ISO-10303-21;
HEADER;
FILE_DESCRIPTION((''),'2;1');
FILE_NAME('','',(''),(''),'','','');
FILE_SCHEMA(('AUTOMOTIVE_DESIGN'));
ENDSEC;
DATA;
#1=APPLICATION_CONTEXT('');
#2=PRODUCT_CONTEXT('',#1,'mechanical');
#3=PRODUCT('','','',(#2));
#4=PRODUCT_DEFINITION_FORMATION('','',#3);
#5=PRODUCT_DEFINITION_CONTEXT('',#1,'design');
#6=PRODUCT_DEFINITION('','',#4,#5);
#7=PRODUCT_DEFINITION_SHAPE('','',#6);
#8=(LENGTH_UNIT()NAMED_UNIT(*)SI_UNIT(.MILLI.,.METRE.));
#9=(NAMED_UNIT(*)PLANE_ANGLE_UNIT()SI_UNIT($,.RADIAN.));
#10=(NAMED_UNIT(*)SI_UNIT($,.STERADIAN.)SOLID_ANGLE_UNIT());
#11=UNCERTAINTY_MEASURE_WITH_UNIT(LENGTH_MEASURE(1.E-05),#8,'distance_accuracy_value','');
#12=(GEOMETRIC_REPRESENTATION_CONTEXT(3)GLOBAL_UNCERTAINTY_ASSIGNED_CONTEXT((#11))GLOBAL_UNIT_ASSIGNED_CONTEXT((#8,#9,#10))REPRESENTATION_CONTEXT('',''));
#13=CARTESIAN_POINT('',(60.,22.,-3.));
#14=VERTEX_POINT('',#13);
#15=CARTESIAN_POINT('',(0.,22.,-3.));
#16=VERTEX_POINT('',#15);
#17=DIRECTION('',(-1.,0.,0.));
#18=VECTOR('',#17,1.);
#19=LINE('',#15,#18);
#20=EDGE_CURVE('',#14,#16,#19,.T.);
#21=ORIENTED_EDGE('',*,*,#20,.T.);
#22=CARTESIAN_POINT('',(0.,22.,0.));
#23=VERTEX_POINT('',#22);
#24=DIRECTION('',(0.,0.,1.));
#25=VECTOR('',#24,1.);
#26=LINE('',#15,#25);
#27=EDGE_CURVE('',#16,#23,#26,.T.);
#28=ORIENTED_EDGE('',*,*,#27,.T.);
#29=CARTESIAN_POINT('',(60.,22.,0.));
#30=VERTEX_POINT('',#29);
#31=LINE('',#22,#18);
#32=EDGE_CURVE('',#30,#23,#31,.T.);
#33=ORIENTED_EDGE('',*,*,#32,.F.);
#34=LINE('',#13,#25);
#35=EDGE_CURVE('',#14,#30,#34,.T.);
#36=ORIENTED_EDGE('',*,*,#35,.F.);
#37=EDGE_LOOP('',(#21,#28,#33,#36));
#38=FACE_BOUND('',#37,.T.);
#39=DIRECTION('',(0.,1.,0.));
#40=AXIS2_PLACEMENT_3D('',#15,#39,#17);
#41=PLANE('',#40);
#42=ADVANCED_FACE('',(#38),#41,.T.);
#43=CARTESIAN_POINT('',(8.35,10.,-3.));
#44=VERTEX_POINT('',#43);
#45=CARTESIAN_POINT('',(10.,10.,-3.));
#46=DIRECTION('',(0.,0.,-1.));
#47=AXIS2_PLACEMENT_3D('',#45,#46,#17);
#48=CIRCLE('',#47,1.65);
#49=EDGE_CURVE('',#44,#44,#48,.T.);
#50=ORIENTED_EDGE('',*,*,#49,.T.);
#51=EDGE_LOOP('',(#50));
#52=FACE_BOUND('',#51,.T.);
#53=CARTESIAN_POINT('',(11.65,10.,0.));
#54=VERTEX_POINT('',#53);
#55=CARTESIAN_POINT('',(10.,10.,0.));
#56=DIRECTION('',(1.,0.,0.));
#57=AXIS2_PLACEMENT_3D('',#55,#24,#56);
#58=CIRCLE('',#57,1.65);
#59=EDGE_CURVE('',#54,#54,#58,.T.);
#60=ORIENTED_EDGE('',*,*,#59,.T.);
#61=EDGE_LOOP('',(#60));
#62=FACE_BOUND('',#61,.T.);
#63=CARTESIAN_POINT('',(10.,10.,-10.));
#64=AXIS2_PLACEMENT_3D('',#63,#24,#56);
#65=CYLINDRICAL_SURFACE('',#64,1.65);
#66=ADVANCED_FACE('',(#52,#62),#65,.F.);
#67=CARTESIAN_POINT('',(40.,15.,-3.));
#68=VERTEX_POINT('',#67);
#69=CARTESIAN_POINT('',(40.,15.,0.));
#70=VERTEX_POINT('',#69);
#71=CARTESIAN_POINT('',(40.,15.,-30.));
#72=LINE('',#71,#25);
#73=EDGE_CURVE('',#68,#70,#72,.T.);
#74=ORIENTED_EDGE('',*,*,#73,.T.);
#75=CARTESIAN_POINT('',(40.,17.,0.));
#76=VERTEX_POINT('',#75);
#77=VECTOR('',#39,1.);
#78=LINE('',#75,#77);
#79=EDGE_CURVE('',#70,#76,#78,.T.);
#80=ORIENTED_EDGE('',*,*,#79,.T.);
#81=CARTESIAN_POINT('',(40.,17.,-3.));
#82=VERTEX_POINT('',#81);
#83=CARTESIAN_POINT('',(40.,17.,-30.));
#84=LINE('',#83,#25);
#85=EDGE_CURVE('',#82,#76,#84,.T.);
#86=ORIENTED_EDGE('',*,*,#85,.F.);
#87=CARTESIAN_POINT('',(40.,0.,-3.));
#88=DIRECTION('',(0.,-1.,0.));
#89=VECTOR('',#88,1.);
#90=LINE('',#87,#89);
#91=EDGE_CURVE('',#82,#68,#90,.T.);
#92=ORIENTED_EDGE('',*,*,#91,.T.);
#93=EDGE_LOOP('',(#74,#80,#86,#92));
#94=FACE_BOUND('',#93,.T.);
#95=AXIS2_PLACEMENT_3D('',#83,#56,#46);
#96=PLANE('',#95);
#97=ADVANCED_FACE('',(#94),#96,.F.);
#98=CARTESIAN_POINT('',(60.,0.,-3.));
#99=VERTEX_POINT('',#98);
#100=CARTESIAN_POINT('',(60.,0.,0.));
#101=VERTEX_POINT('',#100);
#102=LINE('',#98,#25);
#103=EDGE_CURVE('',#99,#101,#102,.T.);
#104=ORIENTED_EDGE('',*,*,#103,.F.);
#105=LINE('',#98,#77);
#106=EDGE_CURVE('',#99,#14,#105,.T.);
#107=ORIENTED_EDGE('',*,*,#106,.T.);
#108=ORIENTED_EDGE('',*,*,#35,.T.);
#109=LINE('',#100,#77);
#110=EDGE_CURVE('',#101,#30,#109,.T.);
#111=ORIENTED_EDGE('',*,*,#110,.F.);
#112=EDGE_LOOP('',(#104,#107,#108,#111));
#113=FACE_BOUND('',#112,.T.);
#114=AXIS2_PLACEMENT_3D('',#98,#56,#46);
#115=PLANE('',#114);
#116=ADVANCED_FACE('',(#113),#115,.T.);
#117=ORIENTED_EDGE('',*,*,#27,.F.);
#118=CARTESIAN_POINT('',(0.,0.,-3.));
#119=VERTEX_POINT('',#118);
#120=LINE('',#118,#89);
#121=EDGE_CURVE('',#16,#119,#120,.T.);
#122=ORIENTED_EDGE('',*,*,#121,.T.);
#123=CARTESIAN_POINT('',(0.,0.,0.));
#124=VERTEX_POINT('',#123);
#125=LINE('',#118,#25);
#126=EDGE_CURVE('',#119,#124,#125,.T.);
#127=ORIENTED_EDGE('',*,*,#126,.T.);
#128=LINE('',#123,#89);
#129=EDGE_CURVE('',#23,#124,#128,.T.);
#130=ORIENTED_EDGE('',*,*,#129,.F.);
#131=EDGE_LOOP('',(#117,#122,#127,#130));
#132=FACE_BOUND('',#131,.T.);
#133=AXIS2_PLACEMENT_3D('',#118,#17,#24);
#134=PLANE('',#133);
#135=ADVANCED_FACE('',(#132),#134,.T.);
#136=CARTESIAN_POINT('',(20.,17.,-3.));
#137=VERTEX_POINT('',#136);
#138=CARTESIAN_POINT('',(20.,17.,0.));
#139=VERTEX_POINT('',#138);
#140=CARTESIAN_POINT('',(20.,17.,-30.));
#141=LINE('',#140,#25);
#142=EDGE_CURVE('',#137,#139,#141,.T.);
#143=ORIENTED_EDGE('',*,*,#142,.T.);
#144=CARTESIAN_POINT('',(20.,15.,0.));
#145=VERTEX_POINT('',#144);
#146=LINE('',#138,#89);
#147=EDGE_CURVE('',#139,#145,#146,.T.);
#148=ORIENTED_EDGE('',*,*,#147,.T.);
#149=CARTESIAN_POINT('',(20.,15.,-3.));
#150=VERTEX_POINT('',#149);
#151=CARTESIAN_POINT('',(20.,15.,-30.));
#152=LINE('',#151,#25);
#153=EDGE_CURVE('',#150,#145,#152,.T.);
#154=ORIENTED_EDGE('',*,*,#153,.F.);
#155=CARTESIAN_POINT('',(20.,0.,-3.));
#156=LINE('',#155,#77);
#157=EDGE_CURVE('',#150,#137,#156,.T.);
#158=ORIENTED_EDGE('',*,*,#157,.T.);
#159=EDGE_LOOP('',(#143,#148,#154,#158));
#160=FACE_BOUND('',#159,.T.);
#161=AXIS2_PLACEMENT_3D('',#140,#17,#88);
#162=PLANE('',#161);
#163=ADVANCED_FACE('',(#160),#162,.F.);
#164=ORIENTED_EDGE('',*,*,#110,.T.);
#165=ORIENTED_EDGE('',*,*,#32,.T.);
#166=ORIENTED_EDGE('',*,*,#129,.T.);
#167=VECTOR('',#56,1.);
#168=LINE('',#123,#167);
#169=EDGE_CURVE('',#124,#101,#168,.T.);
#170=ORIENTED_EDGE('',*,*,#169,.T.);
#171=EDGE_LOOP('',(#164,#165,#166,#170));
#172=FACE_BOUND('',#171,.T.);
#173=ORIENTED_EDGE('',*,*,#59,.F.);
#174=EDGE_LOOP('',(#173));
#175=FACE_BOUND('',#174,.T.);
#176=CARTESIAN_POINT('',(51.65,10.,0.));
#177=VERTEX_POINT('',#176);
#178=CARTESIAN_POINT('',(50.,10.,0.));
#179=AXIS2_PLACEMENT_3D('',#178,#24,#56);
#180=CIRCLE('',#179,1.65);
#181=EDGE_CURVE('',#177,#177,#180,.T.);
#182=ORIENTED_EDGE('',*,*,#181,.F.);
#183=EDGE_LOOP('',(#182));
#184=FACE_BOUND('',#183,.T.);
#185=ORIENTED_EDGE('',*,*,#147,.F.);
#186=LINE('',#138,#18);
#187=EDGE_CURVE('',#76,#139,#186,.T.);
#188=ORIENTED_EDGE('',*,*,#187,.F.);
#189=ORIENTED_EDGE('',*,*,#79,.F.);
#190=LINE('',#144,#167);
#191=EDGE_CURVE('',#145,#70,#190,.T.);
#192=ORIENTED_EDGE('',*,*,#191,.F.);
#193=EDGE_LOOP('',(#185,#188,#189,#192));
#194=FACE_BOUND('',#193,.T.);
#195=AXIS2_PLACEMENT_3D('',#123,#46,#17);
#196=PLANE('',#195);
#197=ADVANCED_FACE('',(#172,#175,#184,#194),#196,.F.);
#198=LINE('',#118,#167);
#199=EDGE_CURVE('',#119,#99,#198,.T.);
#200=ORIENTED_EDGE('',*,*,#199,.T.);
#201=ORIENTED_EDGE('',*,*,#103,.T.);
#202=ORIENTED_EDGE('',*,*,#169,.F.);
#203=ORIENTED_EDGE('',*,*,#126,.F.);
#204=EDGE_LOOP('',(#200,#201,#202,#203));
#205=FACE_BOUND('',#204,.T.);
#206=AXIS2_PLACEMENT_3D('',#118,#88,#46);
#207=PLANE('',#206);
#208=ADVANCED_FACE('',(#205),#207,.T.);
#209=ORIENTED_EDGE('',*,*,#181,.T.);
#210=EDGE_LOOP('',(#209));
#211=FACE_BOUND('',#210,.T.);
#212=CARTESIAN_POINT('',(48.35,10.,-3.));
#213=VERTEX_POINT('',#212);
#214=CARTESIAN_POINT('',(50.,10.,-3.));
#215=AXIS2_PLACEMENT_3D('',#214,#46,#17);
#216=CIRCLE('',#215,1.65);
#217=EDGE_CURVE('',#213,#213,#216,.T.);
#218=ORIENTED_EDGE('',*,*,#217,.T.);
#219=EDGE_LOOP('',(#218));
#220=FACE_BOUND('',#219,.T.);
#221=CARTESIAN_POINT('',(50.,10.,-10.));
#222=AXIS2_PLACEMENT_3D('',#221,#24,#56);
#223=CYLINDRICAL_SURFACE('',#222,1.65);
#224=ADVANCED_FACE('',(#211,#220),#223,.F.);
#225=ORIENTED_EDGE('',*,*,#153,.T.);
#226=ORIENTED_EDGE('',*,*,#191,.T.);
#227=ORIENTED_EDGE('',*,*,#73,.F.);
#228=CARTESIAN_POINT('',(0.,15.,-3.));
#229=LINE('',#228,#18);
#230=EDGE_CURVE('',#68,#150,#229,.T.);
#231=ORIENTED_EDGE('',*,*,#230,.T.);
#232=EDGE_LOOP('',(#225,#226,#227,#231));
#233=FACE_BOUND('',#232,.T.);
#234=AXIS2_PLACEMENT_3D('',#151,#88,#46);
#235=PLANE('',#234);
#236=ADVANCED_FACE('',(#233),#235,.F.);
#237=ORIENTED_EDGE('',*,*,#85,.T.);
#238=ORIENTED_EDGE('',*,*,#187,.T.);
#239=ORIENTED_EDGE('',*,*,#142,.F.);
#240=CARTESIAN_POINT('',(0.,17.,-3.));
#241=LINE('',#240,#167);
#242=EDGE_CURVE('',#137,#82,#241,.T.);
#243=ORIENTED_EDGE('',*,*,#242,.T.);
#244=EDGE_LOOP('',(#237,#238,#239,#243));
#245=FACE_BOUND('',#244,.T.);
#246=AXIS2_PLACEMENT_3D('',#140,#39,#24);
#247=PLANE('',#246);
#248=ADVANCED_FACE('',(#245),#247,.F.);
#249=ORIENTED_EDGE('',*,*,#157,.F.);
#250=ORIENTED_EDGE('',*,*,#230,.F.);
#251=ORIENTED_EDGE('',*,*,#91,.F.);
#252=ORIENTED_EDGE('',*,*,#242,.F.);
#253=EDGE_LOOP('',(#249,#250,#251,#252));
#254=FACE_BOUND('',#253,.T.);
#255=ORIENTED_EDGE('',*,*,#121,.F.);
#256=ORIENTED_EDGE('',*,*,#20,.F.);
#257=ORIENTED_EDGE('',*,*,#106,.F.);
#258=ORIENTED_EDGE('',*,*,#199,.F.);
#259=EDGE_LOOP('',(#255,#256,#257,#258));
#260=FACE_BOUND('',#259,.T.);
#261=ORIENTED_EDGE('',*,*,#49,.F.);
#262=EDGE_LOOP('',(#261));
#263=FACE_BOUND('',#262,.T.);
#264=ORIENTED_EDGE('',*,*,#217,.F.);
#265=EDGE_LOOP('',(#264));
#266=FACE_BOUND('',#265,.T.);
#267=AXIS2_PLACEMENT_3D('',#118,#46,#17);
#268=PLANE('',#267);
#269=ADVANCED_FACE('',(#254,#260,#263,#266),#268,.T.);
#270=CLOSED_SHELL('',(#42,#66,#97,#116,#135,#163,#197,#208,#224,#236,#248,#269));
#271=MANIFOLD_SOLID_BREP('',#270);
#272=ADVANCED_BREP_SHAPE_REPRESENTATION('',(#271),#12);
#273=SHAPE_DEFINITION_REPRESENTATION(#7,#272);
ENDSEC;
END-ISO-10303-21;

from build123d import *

# Parameters (mm, degrees)
SKETCH_2_W             = 60
SKETCH_2_H             = 22
SM_BASE_FLANGE_1_DEPTH = 3
SKETCH_7_W             = 20
SKETCH_7_H             = 2
CUT_EXTRUDE_1_DEPTH    = 30
SKETCH_8_R             = 1.65
CUT_EXTRUDE_2_DEPTH    = 10


# Sheet-metal steps are written as plain solids
with BuildPart() as part:
    # Sketch 2 → 基体-法兰1 (new body)
    with BuildSketch(Plane.XY):
        with Locations((30, 11)):
            Rectangle(SKETCH_2_W, SKETCH_2_H)
    extrude(amount=-SM_BASE_FLANGE_1_DEPTH)

    # 草图7 → 切除-拉伸1 (cut)
    with BuildSketch(Plane.XY):
        with Locations((30, 16)):
            Rectangle(SKETCH_7_W, SKETCH_7_H)
    extrude(amount=-CUT_EXTRUDE_1_DEPTH, mode=Mode.SUBTRACT)

    # 草图8 → 切除-拉伸2 (cut)
    with BuildSketch(Plane.XY):
        with Locations((10, 10)):
            Circle(SKETCH_8_R)
        with Locations((50, 10)):
            Circle(SKETCH_8_R)
    extrude(amount=-CUT_EXTRUDE_2_DEPTH, mode=Mode.SUBTRACT)


solid = part.part
